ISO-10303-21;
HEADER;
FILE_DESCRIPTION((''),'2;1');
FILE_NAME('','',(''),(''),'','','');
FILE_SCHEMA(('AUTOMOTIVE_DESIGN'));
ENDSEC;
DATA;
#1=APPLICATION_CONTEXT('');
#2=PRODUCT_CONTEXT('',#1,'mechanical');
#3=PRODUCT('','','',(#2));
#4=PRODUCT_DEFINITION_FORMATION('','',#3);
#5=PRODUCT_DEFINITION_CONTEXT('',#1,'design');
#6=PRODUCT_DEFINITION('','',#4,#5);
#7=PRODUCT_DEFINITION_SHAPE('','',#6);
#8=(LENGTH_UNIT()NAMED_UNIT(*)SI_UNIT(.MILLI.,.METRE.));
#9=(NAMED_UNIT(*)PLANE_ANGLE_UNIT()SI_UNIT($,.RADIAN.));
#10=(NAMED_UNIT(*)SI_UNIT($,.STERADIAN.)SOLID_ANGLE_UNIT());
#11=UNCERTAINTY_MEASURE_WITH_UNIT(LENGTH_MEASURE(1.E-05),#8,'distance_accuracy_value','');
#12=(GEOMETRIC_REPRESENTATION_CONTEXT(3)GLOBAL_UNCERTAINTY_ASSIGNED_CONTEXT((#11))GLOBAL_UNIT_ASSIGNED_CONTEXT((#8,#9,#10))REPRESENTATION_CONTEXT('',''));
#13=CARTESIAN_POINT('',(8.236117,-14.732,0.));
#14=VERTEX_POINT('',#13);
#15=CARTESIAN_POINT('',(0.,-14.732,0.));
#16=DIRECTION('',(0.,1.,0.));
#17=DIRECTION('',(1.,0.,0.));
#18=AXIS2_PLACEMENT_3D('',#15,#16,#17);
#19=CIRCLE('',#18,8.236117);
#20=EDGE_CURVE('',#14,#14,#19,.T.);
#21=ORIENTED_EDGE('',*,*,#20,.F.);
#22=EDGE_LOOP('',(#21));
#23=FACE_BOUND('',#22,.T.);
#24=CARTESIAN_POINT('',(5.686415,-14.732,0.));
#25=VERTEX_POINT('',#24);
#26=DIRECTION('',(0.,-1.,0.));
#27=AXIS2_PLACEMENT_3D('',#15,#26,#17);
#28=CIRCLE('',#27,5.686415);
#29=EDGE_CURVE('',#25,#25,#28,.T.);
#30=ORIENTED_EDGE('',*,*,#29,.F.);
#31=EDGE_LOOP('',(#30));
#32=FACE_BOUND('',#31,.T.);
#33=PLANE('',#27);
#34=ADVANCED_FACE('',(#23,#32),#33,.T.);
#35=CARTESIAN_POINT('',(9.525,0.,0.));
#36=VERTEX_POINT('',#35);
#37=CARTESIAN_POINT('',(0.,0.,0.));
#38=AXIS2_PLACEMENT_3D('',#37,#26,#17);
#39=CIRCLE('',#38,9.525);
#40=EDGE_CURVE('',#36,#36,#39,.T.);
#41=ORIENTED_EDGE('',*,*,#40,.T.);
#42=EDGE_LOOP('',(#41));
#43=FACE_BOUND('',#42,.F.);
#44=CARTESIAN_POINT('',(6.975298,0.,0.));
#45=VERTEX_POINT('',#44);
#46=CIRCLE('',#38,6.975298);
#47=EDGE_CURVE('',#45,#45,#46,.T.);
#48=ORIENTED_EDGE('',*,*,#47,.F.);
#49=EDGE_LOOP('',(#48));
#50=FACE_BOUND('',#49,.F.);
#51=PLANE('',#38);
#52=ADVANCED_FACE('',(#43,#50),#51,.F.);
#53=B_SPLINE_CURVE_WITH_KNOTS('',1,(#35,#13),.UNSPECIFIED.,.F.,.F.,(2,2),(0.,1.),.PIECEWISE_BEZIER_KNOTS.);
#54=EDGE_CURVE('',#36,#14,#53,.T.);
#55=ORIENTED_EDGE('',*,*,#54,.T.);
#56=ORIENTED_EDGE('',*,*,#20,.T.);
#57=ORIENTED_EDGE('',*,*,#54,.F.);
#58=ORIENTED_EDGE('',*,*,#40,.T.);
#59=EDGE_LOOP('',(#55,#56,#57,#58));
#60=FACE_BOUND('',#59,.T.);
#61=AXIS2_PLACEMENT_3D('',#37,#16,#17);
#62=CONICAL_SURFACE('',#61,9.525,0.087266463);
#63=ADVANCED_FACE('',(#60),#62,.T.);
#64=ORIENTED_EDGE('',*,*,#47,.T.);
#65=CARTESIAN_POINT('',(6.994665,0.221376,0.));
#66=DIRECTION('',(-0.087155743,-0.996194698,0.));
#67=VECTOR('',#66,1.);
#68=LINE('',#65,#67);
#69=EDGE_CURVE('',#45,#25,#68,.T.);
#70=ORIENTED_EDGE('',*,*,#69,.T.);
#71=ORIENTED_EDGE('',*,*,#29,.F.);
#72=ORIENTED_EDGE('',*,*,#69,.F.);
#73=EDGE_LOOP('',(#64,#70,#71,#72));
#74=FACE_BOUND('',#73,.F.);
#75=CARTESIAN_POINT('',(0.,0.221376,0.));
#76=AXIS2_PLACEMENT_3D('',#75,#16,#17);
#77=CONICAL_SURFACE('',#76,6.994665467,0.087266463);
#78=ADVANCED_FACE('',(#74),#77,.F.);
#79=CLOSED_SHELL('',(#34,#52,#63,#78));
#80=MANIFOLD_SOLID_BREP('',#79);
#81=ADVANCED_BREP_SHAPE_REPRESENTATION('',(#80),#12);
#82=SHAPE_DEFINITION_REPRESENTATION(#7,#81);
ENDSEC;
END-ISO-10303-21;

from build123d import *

# Parameters (mm, degrees)
F0_R     = 9.525
F1_DEPTH = 14.732
F1_TAPER = 5
F2_T     = -2.54


with BuildPart() as f1:
    # F0 (on Front) → F1 (new body)
    with BuildSketch(Plane.XZ):
        Circle(F0_R)
    extrude(amount=F1_DEPTH, taper=F1_TAPER)

    # F2
    f2_openings = [f1.faces().sort_by_distance(p)[0] for p in [
        (0, -14.732, 0),
        (0, 0, 0),
    ]]
    offset(amount=F2_T, openings=f2_openings, kind=Kind.INTERSECTION)


solid = f1.part
